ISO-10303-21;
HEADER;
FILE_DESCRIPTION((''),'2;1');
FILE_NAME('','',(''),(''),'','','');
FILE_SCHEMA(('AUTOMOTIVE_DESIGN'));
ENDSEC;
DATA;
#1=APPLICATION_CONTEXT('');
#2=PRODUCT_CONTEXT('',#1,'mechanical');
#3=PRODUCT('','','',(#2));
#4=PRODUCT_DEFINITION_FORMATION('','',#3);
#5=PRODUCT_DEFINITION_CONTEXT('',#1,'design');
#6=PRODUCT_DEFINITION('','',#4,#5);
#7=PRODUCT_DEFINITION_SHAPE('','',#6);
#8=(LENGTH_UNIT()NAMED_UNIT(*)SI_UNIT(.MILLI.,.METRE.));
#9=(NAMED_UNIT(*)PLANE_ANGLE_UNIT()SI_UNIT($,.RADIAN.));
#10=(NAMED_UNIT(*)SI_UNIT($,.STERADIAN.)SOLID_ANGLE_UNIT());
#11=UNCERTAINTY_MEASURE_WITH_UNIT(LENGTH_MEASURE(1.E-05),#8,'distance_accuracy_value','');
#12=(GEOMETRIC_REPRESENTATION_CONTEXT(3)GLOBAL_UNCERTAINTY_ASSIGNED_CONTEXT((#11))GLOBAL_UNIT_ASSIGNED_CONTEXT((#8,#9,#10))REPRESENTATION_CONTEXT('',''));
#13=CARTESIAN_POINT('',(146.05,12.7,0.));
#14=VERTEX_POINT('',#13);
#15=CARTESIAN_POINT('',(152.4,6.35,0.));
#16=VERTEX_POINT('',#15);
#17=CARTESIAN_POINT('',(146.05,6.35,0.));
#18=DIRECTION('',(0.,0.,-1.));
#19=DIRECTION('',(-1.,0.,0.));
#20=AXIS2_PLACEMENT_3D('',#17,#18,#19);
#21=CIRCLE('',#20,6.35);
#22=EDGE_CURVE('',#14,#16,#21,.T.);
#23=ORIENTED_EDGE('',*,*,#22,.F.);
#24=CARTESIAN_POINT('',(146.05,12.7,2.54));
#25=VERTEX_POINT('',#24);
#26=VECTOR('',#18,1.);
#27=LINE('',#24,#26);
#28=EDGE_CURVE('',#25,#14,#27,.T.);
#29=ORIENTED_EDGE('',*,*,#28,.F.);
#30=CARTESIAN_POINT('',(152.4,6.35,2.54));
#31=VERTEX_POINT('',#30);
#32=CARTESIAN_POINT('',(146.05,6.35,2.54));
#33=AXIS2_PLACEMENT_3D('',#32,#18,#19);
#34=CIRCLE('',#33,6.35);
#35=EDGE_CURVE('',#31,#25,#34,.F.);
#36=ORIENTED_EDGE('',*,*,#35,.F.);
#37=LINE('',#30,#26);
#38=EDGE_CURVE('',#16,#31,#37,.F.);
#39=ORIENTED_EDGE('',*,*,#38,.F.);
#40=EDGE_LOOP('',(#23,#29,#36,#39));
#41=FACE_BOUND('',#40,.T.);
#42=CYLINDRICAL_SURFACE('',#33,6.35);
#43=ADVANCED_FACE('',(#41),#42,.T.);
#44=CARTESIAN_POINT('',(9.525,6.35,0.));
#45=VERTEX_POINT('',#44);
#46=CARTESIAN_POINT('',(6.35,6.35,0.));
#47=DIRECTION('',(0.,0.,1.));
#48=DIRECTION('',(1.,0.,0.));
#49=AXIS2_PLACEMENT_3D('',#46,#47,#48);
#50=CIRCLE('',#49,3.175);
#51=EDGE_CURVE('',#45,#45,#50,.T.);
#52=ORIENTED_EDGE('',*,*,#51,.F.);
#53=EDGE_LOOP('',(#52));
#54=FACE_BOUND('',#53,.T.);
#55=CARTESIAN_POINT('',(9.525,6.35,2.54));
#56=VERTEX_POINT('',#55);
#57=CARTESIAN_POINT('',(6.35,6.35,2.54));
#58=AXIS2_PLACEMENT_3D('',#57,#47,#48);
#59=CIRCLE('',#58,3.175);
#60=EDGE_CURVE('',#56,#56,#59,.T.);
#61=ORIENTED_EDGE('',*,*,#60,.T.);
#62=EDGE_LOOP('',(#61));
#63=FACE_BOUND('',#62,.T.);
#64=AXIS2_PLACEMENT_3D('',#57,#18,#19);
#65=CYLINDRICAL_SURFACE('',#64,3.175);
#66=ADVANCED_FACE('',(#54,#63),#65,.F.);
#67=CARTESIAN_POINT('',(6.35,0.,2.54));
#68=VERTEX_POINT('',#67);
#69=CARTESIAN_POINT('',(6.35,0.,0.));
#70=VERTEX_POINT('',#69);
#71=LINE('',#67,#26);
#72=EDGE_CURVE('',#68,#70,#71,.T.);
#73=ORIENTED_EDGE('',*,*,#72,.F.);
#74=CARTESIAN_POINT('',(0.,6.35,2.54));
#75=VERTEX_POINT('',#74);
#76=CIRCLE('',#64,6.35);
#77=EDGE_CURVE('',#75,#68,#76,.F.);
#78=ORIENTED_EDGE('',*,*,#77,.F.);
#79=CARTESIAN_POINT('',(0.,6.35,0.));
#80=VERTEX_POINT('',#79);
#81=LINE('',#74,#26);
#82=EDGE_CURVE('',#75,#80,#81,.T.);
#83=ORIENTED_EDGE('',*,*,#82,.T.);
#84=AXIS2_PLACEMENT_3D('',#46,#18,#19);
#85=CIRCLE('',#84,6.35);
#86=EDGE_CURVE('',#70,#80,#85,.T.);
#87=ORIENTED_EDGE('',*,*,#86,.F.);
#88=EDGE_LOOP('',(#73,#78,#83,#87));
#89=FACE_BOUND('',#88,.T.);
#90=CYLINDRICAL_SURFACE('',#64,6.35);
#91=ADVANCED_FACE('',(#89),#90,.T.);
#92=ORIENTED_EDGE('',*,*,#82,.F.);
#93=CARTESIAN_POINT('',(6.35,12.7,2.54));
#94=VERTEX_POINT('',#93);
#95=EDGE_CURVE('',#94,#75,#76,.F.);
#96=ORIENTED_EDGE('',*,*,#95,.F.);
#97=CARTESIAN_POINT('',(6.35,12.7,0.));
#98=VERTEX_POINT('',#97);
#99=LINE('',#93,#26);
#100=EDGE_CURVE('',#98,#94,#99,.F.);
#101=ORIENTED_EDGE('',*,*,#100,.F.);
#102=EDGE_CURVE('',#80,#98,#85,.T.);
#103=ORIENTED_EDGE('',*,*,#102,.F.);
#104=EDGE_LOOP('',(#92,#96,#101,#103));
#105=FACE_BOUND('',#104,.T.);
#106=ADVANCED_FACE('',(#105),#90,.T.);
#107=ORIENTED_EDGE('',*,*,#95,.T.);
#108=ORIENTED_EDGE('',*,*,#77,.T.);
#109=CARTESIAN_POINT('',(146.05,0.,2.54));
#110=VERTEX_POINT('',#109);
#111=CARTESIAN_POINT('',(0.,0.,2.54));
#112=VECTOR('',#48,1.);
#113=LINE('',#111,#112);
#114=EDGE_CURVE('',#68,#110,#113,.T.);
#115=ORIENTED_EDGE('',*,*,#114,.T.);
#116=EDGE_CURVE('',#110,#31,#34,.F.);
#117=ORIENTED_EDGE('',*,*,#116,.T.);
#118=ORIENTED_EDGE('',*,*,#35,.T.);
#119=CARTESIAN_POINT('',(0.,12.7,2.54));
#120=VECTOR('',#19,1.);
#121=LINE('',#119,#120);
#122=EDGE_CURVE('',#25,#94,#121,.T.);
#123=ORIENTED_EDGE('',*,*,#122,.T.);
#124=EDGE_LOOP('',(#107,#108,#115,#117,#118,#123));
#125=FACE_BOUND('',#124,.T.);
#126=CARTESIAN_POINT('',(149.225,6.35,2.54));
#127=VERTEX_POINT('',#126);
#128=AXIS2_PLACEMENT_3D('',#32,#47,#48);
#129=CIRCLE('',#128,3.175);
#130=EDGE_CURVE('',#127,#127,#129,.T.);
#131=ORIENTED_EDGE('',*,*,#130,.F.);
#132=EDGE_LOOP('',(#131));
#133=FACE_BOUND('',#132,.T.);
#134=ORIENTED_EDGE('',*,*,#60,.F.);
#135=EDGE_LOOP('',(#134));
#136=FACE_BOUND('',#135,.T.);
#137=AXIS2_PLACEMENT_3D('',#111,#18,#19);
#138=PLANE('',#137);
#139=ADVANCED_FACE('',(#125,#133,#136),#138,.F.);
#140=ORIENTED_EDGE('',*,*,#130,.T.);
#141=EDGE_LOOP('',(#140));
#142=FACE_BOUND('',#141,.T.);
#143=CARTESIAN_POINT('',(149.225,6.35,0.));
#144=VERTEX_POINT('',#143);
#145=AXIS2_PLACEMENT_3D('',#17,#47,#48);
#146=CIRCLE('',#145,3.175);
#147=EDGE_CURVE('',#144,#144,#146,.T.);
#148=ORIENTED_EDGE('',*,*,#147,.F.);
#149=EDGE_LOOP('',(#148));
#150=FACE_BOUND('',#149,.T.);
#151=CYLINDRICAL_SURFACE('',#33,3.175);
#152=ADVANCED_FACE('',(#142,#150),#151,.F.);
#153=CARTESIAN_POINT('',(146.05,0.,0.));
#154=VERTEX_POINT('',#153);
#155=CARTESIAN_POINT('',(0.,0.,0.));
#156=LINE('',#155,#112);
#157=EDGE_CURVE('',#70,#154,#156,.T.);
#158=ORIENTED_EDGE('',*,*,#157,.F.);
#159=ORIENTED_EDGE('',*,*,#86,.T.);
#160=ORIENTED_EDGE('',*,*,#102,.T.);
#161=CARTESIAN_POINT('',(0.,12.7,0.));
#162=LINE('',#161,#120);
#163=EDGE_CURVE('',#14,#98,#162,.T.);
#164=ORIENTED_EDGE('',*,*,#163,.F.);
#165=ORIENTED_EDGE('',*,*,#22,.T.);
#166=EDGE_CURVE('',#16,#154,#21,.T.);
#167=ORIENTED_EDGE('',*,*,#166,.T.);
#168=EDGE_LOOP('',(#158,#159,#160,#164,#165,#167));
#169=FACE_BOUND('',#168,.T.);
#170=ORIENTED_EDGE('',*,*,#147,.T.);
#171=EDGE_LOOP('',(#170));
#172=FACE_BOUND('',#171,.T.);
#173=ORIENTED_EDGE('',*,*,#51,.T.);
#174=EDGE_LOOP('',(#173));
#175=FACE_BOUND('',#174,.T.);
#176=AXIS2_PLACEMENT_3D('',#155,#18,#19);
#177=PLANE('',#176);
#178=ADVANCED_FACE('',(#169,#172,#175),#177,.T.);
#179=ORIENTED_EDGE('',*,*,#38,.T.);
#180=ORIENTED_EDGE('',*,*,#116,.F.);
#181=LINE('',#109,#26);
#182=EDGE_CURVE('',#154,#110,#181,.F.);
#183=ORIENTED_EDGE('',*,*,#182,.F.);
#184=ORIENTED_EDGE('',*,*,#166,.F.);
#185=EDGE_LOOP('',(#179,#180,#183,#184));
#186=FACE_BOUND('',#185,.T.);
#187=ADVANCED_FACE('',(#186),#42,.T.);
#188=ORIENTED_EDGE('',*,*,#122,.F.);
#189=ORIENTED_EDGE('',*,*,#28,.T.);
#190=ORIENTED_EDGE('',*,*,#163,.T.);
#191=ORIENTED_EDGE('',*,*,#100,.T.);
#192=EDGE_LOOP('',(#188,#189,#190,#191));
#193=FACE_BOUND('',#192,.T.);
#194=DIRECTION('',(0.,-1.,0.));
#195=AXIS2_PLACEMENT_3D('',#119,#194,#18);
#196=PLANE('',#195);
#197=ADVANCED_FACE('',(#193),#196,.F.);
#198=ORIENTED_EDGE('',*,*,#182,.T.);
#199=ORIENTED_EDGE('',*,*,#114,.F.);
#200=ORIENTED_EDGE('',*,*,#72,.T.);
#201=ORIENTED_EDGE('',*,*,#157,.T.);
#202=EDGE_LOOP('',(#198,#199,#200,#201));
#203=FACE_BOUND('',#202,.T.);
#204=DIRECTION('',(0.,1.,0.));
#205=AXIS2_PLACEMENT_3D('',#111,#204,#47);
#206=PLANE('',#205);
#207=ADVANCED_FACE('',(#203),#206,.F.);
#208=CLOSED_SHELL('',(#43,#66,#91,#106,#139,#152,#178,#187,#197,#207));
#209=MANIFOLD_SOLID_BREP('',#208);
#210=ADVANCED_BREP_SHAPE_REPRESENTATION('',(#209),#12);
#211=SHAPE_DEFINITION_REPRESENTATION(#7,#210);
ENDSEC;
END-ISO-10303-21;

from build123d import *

# Parameters (mm, degrees)
SKETCH1_W           = 152.4
SKETCH1_H           = 12.7
SKETCH1_R           = 3.175
BOSS_EXTRUDE1_DEPTH = 2.54
FILLET2_R           = 6.35
FILLET3_R           = 6.35


with BuildPart() as part:
    # Sketch1 → Boss-Extrude1 (new body)
    with BuildSketch(Plane.XY):
        with Locations((76.2, 6.35)):
            Rectangle(SKETCH1_W, SKETCH1_H)
        with Locations((6.35, 6.35)):
            Circle(SKETCH1_R, mode=Mode.SUBTRACT)
        with Locations((146.05, 6.35)):
            Circle(SKETCH1_R, mode=Mode.SUBTRACT)
    extrude(amount=BOSS_EXTRUDE1_DEPTH)

    # Fillet2
    fillet2_edges = [part.edges().sort_by_distance(p)[0] for p in [
        (0, 0, 1.27),
        (0, 12.7, 1.27),
    ]]
    fillet(fillet2_edges, radius=FILLET2_R - 0.0001)  # a hair under: the kernel refuses the full size

    # Fillet3
    fillet3_edges = [part.edges().sort_by_distance(p)[0] for p in [
        (152.4, 0, 1.27),
        (152.4, 12.7, 1.27),
    ]]
    fillet(fillet3_edges, radius=FILLET3_R - 0.0001)  # a hair under: the kernel refuses the full size


solid = part.part
